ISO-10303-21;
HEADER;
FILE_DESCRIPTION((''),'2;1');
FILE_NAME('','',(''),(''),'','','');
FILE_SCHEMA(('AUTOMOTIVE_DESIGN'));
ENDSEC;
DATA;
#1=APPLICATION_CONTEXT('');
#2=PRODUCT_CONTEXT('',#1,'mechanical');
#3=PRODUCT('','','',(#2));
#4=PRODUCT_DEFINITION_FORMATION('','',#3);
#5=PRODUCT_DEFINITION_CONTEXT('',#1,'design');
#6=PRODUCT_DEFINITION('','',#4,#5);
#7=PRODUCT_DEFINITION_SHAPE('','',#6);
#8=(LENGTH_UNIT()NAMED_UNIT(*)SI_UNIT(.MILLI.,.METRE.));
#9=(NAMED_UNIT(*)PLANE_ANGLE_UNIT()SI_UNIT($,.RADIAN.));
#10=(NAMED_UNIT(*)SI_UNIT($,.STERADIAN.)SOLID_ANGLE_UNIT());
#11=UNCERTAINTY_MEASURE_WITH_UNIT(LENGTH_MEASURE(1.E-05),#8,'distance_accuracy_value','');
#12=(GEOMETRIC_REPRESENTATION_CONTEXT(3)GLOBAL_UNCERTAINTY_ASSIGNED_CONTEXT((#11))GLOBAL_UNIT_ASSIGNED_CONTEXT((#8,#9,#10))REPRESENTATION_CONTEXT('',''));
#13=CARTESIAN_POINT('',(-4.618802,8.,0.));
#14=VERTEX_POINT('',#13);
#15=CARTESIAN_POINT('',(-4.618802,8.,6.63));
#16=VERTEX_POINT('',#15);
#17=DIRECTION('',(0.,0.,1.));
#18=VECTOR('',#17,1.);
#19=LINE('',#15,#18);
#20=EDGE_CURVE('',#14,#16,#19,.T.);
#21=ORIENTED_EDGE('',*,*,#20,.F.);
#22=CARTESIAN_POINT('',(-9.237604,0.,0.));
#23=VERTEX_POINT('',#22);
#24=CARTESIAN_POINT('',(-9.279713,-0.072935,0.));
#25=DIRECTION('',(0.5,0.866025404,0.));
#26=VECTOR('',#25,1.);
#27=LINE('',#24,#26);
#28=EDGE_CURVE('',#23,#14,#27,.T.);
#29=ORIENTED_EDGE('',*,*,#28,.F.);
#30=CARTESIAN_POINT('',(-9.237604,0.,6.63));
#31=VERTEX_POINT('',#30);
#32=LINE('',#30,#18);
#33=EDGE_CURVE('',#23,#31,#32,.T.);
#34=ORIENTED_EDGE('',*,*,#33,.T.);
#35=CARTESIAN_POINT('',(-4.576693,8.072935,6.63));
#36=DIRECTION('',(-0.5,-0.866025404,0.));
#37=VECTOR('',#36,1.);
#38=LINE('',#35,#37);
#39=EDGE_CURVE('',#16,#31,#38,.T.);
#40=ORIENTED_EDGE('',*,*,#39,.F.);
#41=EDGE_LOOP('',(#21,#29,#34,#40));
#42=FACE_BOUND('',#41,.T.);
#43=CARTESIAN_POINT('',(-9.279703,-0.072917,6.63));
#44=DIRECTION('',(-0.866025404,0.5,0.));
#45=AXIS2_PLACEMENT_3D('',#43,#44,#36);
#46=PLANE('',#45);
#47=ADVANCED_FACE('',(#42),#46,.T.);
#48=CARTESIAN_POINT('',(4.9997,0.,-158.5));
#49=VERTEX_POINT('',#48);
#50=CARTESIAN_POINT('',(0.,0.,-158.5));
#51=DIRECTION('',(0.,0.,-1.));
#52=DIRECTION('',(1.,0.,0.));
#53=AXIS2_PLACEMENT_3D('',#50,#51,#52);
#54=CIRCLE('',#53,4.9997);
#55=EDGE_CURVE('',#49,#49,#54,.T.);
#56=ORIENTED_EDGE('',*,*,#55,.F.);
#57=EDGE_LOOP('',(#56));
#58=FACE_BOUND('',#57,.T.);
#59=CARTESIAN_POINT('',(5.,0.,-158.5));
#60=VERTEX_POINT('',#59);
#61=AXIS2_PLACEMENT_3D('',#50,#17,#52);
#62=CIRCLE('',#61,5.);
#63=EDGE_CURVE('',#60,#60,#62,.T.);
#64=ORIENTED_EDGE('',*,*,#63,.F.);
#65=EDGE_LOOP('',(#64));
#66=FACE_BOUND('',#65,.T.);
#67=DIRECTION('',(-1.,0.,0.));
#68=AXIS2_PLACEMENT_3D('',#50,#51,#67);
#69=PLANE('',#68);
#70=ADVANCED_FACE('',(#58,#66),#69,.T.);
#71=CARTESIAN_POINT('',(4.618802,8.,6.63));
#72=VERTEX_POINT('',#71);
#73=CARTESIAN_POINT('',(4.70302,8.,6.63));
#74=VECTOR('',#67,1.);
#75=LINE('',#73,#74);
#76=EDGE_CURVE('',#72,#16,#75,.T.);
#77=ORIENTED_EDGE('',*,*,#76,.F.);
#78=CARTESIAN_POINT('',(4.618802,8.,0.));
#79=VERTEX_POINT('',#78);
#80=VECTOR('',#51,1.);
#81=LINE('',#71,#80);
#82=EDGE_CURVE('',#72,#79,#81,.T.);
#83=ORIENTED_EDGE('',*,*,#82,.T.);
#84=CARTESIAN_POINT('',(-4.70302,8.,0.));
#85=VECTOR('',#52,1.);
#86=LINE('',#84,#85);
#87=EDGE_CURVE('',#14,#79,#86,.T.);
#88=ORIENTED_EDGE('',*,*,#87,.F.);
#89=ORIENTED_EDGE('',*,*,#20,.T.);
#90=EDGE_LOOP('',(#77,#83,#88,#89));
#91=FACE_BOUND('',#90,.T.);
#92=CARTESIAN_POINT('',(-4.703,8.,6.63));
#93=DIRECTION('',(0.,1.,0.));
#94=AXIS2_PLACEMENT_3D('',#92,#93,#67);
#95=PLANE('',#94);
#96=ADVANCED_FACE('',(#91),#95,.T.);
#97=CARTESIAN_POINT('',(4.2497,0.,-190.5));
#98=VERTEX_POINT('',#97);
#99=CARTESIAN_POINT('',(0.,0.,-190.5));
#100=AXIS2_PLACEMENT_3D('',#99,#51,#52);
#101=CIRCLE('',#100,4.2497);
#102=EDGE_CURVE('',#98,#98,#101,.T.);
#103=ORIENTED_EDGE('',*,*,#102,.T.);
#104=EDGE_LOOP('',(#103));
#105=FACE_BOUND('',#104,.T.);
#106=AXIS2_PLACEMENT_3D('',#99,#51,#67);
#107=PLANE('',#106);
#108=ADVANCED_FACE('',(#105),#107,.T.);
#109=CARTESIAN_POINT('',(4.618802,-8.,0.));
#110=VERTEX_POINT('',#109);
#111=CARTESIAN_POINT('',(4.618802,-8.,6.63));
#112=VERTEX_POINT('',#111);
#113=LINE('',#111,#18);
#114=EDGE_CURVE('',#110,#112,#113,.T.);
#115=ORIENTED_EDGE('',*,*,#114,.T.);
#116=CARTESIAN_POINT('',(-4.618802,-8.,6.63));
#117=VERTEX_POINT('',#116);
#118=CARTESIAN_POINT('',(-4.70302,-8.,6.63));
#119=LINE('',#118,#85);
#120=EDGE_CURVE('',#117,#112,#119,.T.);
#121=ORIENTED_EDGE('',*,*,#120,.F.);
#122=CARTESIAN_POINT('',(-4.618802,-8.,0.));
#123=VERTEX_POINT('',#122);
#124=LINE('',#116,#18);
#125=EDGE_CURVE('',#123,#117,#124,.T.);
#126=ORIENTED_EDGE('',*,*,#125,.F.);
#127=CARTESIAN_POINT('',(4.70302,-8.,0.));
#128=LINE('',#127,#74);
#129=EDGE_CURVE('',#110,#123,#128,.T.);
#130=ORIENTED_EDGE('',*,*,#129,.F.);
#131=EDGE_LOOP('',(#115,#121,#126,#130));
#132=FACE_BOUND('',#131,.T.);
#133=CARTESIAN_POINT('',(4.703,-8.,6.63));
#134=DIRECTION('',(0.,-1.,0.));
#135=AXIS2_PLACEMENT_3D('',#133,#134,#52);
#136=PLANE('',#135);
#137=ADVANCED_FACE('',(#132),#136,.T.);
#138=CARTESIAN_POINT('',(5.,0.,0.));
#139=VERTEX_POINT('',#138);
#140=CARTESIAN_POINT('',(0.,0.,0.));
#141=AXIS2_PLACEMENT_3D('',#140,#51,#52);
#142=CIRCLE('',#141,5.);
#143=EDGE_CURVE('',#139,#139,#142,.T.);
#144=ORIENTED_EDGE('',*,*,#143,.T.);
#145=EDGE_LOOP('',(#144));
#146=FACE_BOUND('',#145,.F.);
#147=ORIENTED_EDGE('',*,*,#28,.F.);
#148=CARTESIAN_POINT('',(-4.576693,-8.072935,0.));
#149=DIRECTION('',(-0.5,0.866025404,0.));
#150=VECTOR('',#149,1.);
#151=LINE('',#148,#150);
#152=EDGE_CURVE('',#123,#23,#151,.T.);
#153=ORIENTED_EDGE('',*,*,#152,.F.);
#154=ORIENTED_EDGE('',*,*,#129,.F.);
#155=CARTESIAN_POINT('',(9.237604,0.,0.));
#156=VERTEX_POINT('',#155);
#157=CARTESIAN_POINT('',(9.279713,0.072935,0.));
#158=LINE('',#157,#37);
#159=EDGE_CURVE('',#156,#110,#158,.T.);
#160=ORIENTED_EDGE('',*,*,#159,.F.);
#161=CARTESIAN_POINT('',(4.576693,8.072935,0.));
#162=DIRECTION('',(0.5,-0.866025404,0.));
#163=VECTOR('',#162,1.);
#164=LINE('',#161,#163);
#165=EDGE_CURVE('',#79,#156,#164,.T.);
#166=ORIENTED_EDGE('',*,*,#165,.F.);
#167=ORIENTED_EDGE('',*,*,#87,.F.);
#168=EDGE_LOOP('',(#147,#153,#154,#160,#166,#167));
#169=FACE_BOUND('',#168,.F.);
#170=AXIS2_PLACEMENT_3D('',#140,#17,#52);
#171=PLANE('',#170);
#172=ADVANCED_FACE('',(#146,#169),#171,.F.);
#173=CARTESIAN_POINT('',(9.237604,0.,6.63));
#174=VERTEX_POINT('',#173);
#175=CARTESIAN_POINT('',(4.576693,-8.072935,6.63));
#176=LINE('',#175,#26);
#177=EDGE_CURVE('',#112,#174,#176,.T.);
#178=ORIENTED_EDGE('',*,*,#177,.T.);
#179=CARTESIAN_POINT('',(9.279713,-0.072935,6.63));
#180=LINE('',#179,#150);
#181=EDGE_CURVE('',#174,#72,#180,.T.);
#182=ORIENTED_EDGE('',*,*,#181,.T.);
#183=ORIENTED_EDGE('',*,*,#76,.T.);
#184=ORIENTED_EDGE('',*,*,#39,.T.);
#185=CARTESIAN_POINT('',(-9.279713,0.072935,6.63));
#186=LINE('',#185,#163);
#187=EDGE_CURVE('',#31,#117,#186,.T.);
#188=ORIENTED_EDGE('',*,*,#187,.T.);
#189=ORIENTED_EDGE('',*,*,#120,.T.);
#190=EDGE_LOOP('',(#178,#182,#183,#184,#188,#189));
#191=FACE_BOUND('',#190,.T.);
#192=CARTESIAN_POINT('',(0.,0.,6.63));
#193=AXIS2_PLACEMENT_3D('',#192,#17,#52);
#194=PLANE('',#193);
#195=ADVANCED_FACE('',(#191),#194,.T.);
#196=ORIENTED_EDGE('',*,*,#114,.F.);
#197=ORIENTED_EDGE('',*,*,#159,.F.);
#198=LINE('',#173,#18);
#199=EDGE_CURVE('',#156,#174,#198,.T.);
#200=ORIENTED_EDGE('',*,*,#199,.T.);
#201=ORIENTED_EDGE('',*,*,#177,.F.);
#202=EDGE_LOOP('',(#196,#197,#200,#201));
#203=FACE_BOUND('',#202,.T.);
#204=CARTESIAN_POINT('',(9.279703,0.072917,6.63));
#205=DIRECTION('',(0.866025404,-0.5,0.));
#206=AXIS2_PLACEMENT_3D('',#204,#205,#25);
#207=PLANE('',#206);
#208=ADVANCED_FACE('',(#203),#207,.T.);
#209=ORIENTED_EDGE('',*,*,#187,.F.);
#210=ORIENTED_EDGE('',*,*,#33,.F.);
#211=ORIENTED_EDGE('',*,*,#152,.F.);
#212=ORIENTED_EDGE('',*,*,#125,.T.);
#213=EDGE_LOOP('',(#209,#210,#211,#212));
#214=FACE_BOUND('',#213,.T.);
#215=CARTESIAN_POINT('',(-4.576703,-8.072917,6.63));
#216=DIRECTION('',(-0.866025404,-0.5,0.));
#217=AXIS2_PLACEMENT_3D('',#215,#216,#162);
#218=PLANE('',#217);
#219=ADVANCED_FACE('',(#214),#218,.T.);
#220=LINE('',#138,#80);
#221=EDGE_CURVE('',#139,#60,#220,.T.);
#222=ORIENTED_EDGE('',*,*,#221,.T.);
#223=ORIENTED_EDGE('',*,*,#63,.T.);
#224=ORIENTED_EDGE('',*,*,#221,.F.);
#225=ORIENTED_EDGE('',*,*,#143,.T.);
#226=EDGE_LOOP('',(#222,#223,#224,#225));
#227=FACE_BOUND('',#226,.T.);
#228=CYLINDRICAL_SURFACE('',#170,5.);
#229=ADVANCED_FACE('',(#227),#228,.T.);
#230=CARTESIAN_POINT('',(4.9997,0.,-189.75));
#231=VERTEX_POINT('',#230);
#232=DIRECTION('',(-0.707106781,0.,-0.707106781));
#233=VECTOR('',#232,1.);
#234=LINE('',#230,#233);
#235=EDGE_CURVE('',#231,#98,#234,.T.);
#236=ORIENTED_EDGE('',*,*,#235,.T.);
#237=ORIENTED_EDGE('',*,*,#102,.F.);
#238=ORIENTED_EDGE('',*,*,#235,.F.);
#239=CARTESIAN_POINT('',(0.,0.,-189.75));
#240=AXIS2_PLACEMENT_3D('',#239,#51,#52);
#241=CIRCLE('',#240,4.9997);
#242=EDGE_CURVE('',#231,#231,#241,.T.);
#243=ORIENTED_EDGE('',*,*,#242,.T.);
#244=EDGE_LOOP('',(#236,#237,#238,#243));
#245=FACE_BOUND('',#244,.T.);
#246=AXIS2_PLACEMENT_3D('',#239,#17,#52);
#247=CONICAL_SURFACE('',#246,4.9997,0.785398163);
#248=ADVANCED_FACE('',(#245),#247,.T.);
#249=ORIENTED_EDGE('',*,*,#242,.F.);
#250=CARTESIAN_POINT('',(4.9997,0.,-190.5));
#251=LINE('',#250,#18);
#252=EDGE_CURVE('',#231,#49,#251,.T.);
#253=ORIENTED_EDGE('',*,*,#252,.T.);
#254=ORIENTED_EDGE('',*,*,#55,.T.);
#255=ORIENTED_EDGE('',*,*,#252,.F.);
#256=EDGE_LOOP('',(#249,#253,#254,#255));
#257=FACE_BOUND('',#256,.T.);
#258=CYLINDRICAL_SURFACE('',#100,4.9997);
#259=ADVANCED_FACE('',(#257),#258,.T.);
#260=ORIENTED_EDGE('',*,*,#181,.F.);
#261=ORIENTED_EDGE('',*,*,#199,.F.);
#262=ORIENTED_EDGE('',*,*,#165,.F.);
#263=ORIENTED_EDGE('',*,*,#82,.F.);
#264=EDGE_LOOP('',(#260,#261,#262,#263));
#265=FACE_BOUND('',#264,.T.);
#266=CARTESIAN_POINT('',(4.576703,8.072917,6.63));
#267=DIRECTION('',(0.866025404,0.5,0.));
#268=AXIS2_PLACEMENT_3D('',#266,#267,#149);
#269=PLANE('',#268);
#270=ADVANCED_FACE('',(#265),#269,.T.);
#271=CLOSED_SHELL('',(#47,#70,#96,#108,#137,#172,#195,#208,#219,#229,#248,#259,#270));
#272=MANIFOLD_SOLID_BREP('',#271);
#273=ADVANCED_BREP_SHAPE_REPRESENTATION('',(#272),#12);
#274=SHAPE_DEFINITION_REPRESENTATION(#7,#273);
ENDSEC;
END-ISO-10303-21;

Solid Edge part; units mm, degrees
sketch "Sketch1" plane through (0, 0, 0) normal (0, 0, 1) x (1, 0, 0)
  circle A0 centre (0, 0) radius 9.28
  dimension "D1" = 18.56
extrude "Protrusion1" add sketch "Sketch1" along normal blind 6.63
sketch "Sketch2" plane through (0, 0, 0) normal (0, 0, -1) x (1, 0, 0)
  circle A0 centre (0, 0) radius 5
extrude "Protrusion2" add sketch "Sketch2" along normal blind 190.5
sketch "Sketch3" plane through (0, 0, -190.5) normal (0, 0, -1) x (1, 0, 0)
  circle A0 centre (0, 0) radius 4.9997
extrude "Cutout1" cut sketch "Sketch3" against normal blind 32 flip side to cut
chamfer "Chamfer_1" distance 0.75 angle 45 1 edges at (-4.9997, 0, -190.5)
sketch "Sketch4" plane through (0, 0, 6.63) normal (0, 0, 1) x (1, 0, 0)
  line L0 (-4.703, 8) -> (4.703, 8)
  dimension "D1" = 16
extrude "Cutout2" cut sketch "Sketch4" against normal up to next material side at (0, 8.05, 6.63)
pattern_circular "Pattern1" count 6 over 360 about axis through (0, 0, 6.63) along (0, 0, 1) of "Cutout2"
properties part number "118481"
